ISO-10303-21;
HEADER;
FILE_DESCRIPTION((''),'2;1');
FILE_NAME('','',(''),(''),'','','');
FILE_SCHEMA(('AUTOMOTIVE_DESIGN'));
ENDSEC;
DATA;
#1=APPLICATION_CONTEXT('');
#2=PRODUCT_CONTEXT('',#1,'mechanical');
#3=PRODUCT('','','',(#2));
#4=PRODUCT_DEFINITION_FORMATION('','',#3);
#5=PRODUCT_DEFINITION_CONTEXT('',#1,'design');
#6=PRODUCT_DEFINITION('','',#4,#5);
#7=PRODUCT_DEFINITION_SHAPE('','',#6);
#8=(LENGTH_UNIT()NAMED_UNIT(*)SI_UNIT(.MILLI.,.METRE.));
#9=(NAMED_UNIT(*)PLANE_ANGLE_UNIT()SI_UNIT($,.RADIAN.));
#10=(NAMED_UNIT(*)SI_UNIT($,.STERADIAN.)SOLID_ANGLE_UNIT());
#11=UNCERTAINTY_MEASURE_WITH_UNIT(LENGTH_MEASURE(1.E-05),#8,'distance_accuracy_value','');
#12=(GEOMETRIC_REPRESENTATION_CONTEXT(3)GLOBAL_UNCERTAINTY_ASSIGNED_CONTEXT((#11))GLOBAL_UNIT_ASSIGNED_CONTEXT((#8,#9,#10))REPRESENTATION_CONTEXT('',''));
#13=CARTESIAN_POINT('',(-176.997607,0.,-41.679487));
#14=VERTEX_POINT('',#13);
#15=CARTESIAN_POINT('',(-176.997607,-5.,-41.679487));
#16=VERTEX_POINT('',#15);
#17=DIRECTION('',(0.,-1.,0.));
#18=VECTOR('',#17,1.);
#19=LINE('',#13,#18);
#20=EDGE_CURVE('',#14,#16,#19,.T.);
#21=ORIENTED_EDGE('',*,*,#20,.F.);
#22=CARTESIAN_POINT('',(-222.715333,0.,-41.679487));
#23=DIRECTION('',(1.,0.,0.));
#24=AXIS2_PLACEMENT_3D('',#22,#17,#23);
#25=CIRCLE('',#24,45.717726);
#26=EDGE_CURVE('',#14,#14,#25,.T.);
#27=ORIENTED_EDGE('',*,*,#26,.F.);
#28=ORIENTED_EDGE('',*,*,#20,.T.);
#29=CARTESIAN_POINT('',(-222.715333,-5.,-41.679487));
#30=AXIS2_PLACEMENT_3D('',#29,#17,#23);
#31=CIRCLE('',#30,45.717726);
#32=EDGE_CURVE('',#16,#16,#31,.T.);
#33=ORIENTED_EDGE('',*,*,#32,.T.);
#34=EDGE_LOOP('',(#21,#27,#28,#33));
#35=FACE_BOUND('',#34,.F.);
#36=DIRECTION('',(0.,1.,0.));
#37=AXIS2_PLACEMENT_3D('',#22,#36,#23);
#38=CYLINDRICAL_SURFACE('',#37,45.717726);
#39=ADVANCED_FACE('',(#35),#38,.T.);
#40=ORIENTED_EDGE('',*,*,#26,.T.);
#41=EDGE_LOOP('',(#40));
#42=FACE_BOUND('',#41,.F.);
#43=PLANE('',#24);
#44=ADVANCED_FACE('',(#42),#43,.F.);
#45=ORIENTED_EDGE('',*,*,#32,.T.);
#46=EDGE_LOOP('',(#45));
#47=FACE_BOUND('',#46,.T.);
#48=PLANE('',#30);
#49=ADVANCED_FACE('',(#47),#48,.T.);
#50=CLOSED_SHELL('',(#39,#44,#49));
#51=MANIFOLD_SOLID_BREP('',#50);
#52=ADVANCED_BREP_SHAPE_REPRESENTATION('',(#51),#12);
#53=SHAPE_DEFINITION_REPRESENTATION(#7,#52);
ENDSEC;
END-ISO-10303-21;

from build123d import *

# Parameters (mm, degrees)
F0_R     = 45.7177259428
F1_DEPTH = 5
F2_R     = 1.5175
F3_DEPTH = 0.3


# Not quite as in the source:
# - a feature names something its author has since deleted; it is built from what else it names


with BuildPart() as f1:
    # F0 (on Front) → F1 (new body)
    with BuildSketch(Plane.XZ):
        with Locations((-222.7153331041, -41.6794866323)):
            Circle(F0_R)
    extrude(amount=F1_DEPTH)

    # F2 (on face) → F3 (join)
    with BuildSketch(Plane.XZ.offset(5)):
        with Locations((-222.7153331041, -41.6794866323)):
            Circle(F2_R)
    extrude(amount=-F3_DEPTH)


solid = f1.part
